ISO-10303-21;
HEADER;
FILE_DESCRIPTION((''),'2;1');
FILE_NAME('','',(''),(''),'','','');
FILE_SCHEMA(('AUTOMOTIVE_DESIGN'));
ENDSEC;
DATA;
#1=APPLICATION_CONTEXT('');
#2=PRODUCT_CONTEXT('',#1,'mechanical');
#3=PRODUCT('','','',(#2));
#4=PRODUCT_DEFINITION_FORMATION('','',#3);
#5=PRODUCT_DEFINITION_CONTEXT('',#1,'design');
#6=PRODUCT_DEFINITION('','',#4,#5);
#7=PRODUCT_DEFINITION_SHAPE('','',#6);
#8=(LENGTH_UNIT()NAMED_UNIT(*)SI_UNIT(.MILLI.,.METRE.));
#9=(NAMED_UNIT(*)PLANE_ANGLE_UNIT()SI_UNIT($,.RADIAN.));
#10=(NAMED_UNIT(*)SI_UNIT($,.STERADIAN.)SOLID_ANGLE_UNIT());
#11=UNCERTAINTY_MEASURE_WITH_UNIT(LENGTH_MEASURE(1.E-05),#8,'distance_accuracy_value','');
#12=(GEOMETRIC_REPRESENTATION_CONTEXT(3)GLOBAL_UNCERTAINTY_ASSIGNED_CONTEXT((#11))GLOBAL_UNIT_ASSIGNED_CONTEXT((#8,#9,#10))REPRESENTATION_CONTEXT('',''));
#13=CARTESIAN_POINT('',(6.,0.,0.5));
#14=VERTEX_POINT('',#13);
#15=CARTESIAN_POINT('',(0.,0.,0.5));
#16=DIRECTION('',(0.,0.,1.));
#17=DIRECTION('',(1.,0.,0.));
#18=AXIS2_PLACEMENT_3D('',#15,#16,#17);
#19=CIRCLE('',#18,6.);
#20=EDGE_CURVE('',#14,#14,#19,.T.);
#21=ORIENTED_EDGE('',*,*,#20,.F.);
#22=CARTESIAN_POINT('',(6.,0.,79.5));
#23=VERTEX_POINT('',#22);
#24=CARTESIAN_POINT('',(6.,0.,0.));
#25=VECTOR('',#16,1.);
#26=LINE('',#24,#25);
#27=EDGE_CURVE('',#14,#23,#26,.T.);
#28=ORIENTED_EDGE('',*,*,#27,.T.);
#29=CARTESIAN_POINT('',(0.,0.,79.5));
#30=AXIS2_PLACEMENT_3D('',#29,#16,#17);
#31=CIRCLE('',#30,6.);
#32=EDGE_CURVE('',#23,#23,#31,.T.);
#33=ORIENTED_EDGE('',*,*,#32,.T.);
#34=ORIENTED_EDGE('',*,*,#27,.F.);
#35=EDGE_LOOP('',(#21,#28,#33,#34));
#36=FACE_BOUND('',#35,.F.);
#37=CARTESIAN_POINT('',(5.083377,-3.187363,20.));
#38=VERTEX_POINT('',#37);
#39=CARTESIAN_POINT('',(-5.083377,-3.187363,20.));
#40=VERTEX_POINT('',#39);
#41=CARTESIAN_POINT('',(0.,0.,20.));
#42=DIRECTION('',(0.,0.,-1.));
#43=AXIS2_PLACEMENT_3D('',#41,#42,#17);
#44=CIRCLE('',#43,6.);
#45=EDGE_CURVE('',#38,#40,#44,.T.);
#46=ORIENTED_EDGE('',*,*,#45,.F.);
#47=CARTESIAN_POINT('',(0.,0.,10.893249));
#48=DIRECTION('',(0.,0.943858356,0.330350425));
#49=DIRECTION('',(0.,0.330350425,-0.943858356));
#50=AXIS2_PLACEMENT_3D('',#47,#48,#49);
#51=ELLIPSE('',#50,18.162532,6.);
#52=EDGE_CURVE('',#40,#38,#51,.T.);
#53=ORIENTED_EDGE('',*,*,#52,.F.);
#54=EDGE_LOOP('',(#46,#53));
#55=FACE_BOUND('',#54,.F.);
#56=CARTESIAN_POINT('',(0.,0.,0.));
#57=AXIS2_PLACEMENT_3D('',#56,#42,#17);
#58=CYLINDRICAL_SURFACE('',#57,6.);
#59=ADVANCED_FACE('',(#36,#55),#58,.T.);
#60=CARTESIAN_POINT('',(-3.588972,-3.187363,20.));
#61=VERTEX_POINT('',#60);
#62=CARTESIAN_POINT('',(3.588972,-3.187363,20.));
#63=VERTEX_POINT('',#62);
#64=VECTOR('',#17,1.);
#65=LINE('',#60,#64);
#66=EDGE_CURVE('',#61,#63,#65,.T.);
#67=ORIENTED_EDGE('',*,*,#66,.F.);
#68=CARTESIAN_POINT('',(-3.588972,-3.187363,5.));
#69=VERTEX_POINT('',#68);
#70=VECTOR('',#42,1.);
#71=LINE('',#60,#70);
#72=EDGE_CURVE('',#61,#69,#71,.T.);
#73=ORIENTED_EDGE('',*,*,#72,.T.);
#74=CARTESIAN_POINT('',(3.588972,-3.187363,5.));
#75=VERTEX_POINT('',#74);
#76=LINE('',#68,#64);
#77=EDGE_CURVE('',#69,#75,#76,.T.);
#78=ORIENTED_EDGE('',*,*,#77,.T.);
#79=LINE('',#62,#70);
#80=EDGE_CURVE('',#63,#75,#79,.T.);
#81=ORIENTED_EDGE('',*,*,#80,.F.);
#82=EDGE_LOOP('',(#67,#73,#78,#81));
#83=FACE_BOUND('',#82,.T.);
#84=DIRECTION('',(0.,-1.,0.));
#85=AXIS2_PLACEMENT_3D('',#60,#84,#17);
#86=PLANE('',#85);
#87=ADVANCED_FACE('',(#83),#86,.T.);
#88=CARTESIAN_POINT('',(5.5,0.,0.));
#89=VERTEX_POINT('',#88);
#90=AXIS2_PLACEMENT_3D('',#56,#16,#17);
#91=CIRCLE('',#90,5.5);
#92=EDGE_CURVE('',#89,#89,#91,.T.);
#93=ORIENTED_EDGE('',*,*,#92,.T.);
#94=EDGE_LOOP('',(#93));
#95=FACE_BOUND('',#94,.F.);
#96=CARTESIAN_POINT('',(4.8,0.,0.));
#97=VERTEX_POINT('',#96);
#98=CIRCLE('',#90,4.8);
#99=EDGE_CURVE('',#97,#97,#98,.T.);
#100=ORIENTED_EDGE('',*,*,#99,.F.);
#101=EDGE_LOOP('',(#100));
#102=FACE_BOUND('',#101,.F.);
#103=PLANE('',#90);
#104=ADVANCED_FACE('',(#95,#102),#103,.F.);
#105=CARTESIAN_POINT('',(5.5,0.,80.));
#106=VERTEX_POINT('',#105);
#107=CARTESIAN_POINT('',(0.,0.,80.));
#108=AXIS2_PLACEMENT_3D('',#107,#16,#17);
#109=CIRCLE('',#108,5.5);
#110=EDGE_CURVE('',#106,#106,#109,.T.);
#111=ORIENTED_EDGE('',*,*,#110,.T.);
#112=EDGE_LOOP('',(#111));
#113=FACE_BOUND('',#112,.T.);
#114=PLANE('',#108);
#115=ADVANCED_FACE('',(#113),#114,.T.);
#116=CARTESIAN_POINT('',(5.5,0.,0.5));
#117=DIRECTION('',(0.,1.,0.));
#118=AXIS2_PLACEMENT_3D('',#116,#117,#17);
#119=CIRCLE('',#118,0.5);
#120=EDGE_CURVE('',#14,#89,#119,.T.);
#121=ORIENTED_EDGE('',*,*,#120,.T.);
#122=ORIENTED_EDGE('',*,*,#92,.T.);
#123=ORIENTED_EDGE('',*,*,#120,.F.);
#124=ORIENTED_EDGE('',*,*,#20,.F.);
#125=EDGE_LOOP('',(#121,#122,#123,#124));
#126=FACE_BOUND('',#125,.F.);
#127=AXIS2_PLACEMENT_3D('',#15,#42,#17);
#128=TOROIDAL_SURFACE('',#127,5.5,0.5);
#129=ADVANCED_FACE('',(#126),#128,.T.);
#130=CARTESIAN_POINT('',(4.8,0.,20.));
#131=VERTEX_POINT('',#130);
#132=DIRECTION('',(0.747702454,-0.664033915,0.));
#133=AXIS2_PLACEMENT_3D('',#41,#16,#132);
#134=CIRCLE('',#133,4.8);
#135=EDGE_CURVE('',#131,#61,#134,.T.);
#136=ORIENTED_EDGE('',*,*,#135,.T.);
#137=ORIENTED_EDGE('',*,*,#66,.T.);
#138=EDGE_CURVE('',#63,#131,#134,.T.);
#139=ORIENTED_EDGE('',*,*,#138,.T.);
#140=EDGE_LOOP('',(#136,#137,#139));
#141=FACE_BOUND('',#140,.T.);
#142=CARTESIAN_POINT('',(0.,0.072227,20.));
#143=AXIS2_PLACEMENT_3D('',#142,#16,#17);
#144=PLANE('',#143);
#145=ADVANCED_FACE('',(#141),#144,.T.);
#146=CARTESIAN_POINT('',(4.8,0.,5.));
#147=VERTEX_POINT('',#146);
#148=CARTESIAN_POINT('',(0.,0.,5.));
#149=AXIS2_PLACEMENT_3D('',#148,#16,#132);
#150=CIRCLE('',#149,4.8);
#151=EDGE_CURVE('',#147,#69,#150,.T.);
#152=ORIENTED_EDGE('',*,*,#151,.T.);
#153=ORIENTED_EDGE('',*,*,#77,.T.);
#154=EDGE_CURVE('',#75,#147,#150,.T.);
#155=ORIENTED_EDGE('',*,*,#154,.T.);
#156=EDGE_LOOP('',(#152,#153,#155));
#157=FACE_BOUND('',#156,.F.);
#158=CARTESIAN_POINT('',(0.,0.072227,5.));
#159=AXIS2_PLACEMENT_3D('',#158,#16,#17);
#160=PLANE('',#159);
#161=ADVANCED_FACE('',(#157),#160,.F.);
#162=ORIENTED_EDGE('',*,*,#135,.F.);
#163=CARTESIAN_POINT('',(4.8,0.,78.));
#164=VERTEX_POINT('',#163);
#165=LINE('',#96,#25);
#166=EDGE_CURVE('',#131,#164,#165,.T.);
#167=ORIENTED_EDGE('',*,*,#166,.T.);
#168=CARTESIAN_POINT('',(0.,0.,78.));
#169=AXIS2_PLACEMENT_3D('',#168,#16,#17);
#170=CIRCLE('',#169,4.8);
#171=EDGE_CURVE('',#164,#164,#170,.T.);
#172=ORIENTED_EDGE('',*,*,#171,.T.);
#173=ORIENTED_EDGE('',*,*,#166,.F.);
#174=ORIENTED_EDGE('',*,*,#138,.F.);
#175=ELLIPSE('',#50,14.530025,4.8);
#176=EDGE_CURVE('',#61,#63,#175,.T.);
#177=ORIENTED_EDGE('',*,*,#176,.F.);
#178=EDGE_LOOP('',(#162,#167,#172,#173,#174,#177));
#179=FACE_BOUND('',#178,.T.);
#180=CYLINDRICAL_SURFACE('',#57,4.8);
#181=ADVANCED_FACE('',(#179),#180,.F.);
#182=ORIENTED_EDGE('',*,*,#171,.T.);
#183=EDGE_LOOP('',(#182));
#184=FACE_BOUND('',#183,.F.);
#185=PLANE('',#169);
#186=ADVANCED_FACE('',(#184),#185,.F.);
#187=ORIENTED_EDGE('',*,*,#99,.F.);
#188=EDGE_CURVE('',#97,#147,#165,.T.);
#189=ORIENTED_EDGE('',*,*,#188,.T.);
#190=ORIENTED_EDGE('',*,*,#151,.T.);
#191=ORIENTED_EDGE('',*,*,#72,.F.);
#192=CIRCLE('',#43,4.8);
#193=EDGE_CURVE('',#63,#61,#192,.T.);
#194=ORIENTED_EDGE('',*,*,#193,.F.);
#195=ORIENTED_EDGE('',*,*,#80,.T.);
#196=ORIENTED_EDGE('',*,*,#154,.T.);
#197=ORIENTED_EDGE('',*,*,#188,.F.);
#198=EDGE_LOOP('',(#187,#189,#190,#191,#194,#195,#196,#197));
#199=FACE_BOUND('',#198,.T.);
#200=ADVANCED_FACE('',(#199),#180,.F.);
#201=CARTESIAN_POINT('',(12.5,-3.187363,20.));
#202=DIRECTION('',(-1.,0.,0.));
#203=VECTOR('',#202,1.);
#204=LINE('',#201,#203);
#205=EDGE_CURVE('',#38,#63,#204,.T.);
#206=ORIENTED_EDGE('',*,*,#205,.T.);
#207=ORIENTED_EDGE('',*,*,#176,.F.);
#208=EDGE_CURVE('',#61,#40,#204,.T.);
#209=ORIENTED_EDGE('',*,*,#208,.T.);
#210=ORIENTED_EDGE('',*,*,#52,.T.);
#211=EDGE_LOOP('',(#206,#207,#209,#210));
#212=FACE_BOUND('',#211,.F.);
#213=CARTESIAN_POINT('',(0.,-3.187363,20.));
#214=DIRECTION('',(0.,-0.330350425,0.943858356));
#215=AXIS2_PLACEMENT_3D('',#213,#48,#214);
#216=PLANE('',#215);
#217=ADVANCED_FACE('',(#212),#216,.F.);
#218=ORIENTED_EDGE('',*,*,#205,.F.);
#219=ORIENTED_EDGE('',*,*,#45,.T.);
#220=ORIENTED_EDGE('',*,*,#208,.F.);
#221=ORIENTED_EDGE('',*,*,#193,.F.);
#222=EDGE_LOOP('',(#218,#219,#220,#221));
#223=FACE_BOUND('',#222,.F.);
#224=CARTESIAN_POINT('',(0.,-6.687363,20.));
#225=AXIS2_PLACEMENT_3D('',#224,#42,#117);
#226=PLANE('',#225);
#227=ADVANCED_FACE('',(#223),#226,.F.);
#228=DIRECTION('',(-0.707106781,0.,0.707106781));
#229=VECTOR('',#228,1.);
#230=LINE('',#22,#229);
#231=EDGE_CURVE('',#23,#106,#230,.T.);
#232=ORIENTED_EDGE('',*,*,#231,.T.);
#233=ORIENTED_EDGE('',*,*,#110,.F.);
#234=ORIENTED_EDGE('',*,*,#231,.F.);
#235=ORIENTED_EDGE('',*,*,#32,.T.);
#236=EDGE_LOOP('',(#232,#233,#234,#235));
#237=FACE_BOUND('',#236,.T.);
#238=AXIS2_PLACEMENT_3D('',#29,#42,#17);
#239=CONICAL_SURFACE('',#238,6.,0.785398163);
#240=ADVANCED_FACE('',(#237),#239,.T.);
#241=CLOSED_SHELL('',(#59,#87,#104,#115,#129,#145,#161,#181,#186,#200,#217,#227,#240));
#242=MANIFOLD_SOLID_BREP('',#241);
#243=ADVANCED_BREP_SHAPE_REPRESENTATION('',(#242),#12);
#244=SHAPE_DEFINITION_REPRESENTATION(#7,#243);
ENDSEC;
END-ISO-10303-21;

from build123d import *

# Parameters (mm, degrees)
F0_R     = 6
F0_R_2   = 4.8
F1_DEPTH = 80
F3_DEPTH = 12.5
F5_DEPTH = 15
F6_R     = 4.8
F7_DEPTH = 2
F8_R     = 0.5
F9_SIZE  = 0.5


with BuildPart() as f1:
    # F0 (on Top) → F1 (new body)
    with BuildSketch(Plane.XY):
        Circle(F0_R)
        Circle(F0_R_2, mode=Mode.SUBTRACT)
    extrude(amount=F1_DEPTH)

    # F2 (on Right) → F3 (cut, symmetric)
    with BuildSketch(Plane.YZ):
        Polygon((-6.6873627901, 30), (-6.6873627901, 20), (-3.1873627901, 20), align=None)
    extrude(amount=F3_DEPTH, both=True, mode=Mode.SUBTRACT)

    # F4 (on face) → F5 (join)
    with BuildSketch(Plane.XY.offset(20)):
        with BuildLine():
            Line((-3.5889717809, -3.1873627901), (3.5889717809, -3.1873627901))
            ThreePointArc((3.5889717809, -3.1873627901), (0, 4.8), (-3.5889717809, -3.1873627901))
        make_face()
    extrude(amount=-F5_DEPTH)

    # F6 (on face) → F7 (join)
    with BuildSketch(Plane.XY.offset(80)):
        Circle(F6_R)
    extrude(amount=-F7_DEPTH)

    # F8
    f8_edges = [f1.edges().sort_by_distance(p)[0] for p in [
        (-6, 0, 0),
    ]]
    fillet(f8_edges, radius=F8_R)

    # F9
    f9_edges = [f1.edges().sort_by_distance(p)[0] for p in [
        (-6, 0, 80),
    ]]
    chamfer(f9_edges, length=F9_SIZE)


solid = f1.part
